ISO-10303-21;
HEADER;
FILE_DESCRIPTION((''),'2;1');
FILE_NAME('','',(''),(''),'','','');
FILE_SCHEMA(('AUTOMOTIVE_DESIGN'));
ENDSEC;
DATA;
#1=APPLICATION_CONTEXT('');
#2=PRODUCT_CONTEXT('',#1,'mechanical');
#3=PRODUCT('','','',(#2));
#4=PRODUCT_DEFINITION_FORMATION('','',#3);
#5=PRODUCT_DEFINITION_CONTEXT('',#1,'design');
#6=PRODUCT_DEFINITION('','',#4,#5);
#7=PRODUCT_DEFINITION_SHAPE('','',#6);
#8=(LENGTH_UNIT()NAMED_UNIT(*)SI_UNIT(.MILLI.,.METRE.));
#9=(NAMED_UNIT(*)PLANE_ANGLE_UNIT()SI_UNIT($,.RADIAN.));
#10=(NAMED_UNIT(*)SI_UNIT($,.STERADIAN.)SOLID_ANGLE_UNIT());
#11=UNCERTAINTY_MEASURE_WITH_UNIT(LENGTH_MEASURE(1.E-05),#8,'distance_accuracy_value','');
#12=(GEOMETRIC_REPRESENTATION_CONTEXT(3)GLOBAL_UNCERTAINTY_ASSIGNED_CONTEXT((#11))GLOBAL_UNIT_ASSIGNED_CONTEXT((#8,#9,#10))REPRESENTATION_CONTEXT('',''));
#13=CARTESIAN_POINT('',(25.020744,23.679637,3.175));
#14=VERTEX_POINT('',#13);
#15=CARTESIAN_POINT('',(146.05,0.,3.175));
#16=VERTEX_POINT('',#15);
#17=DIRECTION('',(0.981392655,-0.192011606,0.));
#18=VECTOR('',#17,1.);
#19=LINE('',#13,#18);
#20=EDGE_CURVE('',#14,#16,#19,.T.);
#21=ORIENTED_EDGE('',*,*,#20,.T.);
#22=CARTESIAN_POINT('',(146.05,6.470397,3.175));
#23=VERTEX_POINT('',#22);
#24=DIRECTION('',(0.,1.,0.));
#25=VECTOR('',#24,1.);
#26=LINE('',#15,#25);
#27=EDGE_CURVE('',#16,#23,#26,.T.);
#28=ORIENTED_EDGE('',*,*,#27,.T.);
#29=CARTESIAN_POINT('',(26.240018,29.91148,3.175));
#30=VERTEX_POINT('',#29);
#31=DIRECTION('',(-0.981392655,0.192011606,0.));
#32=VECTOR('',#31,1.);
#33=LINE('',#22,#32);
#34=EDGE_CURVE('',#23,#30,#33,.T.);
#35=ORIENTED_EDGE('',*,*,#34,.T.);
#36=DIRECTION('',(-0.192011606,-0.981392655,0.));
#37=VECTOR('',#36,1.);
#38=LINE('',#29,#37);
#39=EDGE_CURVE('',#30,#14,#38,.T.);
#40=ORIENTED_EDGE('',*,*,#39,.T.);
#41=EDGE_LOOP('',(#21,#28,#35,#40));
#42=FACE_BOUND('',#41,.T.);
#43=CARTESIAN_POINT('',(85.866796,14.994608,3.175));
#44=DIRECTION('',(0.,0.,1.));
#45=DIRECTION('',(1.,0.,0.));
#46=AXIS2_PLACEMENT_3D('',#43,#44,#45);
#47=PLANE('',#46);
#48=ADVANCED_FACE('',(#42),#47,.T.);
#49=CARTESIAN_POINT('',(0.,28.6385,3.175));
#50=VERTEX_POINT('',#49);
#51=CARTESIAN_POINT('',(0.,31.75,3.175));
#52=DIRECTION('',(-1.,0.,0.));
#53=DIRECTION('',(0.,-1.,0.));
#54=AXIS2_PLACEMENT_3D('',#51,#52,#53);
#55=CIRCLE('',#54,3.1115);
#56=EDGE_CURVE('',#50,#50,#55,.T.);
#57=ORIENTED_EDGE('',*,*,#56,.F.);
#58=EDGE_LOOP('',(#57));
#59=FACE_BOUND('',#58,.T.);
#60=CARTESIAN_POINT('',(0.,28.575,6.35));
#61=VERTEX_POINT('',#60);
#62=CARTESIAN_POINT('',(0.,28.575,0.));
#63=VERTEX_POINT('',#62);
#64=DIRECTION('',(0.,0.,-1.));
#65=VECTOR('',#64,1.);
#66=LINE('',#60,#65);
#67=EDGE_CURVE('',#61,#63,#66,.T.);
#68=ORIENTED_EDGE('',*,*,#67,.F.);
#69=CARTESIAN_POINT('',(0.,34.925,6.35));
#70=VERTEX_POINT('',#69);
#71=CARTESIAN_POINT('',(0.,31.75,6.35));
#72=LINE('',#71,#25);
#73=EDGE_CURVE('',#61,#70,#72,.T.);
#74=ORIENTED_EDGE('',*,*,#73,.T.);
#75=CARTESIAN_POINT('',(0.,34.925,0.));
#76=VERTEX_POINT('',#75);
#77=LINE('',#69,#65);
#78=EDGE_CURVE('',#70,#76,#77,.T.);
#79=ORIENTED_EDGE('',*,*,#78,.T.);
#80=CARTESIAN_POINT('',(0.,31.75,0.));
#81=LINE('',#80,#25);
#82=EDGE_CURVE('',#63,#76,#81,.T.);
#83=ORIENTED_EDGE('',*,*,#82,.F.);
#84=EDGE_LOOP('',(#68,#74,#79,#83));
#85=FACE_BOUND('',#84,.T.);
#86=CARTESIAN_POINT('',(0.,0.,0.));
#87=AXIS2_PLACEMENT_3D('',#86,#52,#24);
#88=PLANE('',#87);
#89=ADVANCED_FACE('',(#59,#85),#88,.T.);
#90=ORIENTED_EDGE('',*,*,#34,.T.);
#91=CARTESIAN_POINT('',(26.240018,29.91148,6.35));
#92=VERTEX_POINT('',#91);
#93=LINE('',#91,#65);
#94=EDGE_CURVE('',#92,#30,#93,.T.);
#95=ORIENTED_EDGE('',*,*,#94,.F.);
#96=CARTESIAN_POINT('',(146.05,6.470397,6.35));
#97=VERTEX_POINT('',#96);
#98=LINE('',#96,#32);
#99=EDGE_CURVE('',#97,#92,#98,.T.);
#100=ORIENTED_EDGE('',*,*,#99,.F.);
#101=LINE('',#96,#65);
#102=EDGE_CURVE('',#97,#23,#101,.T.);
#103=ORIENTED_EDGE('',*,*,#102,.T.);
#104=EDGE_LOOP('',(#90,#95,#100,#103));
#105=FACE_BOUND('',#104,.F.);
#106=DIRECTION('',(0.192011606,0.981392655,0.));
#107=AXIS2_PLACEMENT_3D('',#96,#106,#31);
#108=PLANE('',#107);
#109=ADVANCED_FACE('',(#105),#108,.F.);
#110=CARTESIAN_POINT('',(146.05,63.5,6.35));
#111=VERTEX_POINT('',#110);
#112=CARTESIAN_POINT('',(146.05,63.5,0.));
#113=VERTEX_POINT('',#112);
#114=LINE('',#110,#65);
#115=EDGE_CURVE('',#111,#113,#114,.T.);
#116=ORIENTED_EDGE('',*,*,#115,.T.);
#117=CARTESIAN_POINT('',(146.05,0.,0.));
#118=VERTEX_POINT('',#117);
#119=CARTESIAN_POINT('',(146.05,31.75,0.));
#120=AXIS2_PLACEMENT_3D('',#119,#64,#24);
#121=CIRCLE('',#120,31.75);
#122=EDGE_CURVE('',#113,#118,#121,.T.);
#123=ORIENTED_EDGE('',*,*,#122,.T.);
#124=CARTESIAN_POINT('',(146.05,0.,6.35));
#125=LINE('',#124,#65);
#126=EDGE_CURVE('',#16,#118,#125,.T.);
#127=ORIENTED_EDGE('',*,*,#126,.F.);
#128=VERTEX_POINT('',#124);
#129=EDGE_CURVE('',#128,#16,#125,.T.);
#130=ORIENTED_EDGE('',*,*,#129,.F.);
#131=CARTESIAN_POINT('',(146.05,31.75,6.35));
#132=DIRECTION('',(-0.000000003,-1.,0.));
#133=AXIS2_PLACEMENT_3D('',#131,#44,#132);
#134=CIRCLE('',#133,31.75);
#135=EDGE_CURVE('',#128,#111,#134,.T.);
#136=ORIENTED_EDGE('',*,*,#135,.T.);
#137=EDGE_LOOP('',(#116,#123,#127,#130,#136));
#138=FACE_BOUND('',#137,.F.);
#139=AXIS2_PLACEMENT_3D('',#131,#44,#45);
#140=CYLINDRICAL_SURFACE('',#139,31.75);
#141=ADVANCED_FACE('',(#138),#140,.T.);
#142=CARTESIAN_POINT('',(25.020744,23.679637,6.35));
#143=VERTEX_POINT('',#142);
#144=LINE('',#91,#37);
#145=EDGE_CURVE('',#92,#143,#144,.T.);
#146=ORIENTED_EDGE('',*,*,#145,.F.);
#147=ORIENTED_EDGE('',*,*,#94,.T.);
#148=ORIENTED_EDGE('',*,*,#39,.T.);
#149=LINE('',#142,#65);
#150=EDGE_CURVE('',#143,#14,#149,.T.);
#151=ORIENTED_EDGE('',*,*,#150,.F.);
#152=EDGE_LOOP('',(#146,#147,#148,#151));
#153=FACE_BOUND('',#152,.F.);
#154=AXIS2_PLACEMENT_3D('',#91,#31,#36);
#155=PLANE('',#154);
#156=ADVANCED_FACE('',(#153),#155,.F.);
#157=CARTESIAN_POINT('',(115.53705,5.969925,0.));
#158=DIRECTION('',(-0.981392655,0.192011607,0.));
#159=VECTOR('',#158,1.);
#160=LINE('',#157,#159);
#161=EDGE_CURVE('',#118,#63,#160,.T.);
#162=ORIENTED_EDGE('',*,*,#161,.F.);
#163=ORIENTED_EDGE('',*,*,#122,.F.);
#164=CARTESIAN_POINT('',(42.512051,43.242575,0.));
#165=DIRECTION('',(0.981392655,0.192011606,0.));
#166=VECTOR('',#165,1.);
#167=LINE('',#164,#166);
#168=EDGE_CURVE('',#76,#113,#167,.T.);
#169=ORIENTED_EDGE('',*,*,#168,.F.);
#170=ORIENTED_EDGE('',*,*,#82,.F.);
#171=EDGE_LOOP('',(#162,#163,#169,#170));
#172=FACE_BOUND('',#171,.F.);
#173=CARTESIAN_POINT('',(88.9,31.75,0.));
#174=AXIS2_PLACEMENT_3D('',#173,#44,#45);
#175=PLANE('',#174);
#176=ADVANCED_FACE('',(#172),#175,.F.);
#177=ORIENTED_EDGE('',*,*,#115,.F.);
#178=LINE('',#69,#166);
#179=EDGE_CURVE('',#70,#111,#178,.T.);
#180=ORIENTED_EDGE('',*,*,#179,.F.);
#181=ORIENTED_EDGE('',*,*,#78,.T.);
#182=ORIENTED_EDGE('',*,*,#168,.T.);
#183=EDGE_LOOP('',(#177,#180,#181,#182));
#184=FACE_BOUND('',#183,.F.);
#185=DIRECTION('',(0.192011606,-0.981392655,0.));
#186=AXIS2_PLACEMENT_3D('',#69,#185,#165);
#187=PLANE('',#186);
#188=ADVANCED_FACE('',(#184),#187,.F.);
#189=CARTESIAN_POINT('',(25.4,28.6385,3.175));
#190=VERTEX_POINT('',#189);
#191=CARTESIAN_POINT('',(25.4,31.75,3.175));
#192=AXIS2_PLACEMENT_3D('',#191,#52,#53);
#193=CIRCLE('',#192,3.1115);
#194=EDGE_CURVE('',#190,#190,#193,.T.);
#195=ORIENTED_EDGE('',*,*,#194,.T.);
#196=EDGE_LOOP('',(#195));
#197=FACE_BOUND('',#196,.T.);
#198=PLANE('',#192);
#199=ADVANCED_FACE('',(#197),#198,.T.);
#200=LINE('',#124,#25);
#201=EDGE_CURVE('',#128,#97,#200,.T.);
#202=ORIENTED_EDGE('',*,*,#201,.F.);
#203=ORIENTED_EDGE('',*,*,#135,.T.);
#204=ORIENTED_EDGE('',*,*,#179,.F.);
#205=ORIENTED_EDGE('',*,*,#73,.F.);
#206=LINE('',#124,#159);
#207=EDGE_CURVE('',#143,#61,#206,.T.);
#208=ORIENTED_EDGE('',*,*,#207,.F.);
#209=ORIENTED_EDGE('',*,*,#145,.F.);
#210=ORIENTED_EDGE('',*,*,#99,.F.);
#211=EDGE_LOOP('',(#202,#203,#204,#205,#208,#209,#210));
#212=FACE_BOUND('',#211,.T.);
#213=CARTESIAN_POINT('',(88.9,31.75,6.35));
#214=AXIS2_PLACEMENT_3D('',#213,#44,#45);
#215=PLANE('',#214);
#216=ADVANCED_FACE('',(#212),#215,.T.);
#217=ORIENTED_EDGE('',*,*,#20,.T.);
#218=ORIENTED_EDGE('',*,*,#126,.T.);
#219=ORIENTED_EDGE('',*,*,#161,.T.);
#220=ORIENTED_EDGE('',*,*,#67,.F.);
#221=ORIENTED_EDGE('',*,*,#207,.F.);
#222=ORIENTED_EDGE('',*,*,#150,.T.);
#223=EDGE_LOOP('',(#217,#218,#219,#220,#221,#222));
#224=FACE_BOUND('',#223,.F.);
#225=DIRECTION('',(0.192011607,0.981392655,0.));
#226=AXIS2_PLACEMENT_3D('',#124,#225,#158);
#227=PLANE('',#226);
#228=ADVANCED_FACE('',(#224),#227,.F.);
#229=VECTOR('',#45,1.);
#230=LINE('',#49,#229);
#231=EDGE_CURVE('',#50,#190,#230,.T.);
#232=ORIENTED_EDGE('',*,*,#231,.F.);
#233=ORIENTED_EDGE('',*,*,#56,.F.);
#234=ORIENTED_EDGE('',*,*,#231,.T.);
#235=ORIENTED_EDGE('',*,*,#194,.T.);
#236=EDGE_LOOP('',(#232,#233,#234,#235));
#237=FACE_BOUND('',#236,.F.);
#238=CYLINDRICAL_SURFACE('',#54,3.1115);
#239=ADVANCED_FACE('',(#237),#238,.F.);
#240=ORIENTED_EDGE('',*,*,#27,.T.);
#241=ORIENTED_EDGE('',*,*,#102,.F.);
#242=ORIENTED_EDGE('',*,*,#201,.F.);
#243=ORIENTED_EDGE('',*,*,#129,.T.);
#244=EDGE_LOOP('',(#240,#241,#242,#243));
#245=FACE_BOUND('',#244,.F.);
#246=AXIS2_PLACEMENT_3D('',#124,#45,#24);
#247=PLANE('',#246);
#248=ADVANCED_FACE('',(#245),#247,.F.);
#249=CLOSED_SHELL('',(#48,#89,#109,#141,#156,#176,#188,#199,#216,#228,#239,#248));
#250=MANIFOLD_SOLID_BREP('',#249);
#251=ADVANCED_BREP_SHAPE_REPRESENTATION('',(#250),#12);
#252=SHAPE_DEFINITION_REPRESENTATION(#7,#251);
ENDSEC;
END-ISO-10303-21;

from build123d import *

# Parameters (mm, degrees)
F0_W     = 177.8
F0_H     = 63.5
F1_DEPTH = 6.35
F3_DEPTH = 25.4
F5_DEPTH = 25.4
F6_R     = 3.1115
F7_DEPTH = 25.4
F9_DEPTH = 3.175


# Not quite as in the source:
# - ends of sketch curves that miss each other by under 0.0002 mm in the source are joined


with BuildPart() as f1:
    # F0 (on Top) → F1 (new body)
    with BuildSketch(Plane.XY):
        with Locations((88.9, 31.75)):
            Rectangle(F0_W, F0_H)
    extrude(amount=F1_DEPTH)

    # F2 (on face) → F3 (cut)
    with BuildSketch(Plane.XY.offset(6.35)):
        with BuildLine():
            ThreePointArc((146.05, 63.5), (168.5006403027, 54.2006403027), (177.8, 31.75))
            Line((177.8, 31.75), (177.8, 63.5))
            Line((177.8, 63.5), (146.05, 63.5))
        make_face()
        with BuildLine():
            ThreePointArc((177.8, 31.75), (168.5006402649, 9.2993596596), (146.0499998933, 0))
            Line((146.0499998933, 0), (177.8, 0))
            Line((177.8, 0), (177.8, 31.75))
        make_face()
    extrude(amount=-F3_DEPTH, mode=Mode.SUBTRACT)

    # F4 (on face) → F5 (cut)
    with BuildSketch(Plane.XY.offset(6.35)):
        Polygon((0, 34.925), (146.05, 63.5), (0, 63.5), align=None)
        Polygon((0, 0), (146.0499998933, 0), (0, 28.575), align=None)
    extrude(amount=-F5_DEPTH, mode=Mode.SUBTRACT)

    # F6 (on face) → F7 (cut)
    with BuildSketch(Plane(origin=(0, 0, 0), x_dir=(0, -1, 0), z_dir=(-1, 0, 0))):
        with Locations((-31.75, 3.175)):
            Circle(F6_R)
    extrude(amount=-F7_DEPTH, mode=Mode.SUBTRACT)

    # F8 (on face) → F9 (cut)
    with BuildSketch(Plane.XY.offset(6.35)):
        Polygon((26.2400177438, 29.9114803934), (25.0207440433, 23.679637035), (146.05, 0), (146.05, 6.4703969085), align=None)
    extrude(amount=-F9_DEPTH, mode=Mode.SUBTRACT)


solid = f1.part
